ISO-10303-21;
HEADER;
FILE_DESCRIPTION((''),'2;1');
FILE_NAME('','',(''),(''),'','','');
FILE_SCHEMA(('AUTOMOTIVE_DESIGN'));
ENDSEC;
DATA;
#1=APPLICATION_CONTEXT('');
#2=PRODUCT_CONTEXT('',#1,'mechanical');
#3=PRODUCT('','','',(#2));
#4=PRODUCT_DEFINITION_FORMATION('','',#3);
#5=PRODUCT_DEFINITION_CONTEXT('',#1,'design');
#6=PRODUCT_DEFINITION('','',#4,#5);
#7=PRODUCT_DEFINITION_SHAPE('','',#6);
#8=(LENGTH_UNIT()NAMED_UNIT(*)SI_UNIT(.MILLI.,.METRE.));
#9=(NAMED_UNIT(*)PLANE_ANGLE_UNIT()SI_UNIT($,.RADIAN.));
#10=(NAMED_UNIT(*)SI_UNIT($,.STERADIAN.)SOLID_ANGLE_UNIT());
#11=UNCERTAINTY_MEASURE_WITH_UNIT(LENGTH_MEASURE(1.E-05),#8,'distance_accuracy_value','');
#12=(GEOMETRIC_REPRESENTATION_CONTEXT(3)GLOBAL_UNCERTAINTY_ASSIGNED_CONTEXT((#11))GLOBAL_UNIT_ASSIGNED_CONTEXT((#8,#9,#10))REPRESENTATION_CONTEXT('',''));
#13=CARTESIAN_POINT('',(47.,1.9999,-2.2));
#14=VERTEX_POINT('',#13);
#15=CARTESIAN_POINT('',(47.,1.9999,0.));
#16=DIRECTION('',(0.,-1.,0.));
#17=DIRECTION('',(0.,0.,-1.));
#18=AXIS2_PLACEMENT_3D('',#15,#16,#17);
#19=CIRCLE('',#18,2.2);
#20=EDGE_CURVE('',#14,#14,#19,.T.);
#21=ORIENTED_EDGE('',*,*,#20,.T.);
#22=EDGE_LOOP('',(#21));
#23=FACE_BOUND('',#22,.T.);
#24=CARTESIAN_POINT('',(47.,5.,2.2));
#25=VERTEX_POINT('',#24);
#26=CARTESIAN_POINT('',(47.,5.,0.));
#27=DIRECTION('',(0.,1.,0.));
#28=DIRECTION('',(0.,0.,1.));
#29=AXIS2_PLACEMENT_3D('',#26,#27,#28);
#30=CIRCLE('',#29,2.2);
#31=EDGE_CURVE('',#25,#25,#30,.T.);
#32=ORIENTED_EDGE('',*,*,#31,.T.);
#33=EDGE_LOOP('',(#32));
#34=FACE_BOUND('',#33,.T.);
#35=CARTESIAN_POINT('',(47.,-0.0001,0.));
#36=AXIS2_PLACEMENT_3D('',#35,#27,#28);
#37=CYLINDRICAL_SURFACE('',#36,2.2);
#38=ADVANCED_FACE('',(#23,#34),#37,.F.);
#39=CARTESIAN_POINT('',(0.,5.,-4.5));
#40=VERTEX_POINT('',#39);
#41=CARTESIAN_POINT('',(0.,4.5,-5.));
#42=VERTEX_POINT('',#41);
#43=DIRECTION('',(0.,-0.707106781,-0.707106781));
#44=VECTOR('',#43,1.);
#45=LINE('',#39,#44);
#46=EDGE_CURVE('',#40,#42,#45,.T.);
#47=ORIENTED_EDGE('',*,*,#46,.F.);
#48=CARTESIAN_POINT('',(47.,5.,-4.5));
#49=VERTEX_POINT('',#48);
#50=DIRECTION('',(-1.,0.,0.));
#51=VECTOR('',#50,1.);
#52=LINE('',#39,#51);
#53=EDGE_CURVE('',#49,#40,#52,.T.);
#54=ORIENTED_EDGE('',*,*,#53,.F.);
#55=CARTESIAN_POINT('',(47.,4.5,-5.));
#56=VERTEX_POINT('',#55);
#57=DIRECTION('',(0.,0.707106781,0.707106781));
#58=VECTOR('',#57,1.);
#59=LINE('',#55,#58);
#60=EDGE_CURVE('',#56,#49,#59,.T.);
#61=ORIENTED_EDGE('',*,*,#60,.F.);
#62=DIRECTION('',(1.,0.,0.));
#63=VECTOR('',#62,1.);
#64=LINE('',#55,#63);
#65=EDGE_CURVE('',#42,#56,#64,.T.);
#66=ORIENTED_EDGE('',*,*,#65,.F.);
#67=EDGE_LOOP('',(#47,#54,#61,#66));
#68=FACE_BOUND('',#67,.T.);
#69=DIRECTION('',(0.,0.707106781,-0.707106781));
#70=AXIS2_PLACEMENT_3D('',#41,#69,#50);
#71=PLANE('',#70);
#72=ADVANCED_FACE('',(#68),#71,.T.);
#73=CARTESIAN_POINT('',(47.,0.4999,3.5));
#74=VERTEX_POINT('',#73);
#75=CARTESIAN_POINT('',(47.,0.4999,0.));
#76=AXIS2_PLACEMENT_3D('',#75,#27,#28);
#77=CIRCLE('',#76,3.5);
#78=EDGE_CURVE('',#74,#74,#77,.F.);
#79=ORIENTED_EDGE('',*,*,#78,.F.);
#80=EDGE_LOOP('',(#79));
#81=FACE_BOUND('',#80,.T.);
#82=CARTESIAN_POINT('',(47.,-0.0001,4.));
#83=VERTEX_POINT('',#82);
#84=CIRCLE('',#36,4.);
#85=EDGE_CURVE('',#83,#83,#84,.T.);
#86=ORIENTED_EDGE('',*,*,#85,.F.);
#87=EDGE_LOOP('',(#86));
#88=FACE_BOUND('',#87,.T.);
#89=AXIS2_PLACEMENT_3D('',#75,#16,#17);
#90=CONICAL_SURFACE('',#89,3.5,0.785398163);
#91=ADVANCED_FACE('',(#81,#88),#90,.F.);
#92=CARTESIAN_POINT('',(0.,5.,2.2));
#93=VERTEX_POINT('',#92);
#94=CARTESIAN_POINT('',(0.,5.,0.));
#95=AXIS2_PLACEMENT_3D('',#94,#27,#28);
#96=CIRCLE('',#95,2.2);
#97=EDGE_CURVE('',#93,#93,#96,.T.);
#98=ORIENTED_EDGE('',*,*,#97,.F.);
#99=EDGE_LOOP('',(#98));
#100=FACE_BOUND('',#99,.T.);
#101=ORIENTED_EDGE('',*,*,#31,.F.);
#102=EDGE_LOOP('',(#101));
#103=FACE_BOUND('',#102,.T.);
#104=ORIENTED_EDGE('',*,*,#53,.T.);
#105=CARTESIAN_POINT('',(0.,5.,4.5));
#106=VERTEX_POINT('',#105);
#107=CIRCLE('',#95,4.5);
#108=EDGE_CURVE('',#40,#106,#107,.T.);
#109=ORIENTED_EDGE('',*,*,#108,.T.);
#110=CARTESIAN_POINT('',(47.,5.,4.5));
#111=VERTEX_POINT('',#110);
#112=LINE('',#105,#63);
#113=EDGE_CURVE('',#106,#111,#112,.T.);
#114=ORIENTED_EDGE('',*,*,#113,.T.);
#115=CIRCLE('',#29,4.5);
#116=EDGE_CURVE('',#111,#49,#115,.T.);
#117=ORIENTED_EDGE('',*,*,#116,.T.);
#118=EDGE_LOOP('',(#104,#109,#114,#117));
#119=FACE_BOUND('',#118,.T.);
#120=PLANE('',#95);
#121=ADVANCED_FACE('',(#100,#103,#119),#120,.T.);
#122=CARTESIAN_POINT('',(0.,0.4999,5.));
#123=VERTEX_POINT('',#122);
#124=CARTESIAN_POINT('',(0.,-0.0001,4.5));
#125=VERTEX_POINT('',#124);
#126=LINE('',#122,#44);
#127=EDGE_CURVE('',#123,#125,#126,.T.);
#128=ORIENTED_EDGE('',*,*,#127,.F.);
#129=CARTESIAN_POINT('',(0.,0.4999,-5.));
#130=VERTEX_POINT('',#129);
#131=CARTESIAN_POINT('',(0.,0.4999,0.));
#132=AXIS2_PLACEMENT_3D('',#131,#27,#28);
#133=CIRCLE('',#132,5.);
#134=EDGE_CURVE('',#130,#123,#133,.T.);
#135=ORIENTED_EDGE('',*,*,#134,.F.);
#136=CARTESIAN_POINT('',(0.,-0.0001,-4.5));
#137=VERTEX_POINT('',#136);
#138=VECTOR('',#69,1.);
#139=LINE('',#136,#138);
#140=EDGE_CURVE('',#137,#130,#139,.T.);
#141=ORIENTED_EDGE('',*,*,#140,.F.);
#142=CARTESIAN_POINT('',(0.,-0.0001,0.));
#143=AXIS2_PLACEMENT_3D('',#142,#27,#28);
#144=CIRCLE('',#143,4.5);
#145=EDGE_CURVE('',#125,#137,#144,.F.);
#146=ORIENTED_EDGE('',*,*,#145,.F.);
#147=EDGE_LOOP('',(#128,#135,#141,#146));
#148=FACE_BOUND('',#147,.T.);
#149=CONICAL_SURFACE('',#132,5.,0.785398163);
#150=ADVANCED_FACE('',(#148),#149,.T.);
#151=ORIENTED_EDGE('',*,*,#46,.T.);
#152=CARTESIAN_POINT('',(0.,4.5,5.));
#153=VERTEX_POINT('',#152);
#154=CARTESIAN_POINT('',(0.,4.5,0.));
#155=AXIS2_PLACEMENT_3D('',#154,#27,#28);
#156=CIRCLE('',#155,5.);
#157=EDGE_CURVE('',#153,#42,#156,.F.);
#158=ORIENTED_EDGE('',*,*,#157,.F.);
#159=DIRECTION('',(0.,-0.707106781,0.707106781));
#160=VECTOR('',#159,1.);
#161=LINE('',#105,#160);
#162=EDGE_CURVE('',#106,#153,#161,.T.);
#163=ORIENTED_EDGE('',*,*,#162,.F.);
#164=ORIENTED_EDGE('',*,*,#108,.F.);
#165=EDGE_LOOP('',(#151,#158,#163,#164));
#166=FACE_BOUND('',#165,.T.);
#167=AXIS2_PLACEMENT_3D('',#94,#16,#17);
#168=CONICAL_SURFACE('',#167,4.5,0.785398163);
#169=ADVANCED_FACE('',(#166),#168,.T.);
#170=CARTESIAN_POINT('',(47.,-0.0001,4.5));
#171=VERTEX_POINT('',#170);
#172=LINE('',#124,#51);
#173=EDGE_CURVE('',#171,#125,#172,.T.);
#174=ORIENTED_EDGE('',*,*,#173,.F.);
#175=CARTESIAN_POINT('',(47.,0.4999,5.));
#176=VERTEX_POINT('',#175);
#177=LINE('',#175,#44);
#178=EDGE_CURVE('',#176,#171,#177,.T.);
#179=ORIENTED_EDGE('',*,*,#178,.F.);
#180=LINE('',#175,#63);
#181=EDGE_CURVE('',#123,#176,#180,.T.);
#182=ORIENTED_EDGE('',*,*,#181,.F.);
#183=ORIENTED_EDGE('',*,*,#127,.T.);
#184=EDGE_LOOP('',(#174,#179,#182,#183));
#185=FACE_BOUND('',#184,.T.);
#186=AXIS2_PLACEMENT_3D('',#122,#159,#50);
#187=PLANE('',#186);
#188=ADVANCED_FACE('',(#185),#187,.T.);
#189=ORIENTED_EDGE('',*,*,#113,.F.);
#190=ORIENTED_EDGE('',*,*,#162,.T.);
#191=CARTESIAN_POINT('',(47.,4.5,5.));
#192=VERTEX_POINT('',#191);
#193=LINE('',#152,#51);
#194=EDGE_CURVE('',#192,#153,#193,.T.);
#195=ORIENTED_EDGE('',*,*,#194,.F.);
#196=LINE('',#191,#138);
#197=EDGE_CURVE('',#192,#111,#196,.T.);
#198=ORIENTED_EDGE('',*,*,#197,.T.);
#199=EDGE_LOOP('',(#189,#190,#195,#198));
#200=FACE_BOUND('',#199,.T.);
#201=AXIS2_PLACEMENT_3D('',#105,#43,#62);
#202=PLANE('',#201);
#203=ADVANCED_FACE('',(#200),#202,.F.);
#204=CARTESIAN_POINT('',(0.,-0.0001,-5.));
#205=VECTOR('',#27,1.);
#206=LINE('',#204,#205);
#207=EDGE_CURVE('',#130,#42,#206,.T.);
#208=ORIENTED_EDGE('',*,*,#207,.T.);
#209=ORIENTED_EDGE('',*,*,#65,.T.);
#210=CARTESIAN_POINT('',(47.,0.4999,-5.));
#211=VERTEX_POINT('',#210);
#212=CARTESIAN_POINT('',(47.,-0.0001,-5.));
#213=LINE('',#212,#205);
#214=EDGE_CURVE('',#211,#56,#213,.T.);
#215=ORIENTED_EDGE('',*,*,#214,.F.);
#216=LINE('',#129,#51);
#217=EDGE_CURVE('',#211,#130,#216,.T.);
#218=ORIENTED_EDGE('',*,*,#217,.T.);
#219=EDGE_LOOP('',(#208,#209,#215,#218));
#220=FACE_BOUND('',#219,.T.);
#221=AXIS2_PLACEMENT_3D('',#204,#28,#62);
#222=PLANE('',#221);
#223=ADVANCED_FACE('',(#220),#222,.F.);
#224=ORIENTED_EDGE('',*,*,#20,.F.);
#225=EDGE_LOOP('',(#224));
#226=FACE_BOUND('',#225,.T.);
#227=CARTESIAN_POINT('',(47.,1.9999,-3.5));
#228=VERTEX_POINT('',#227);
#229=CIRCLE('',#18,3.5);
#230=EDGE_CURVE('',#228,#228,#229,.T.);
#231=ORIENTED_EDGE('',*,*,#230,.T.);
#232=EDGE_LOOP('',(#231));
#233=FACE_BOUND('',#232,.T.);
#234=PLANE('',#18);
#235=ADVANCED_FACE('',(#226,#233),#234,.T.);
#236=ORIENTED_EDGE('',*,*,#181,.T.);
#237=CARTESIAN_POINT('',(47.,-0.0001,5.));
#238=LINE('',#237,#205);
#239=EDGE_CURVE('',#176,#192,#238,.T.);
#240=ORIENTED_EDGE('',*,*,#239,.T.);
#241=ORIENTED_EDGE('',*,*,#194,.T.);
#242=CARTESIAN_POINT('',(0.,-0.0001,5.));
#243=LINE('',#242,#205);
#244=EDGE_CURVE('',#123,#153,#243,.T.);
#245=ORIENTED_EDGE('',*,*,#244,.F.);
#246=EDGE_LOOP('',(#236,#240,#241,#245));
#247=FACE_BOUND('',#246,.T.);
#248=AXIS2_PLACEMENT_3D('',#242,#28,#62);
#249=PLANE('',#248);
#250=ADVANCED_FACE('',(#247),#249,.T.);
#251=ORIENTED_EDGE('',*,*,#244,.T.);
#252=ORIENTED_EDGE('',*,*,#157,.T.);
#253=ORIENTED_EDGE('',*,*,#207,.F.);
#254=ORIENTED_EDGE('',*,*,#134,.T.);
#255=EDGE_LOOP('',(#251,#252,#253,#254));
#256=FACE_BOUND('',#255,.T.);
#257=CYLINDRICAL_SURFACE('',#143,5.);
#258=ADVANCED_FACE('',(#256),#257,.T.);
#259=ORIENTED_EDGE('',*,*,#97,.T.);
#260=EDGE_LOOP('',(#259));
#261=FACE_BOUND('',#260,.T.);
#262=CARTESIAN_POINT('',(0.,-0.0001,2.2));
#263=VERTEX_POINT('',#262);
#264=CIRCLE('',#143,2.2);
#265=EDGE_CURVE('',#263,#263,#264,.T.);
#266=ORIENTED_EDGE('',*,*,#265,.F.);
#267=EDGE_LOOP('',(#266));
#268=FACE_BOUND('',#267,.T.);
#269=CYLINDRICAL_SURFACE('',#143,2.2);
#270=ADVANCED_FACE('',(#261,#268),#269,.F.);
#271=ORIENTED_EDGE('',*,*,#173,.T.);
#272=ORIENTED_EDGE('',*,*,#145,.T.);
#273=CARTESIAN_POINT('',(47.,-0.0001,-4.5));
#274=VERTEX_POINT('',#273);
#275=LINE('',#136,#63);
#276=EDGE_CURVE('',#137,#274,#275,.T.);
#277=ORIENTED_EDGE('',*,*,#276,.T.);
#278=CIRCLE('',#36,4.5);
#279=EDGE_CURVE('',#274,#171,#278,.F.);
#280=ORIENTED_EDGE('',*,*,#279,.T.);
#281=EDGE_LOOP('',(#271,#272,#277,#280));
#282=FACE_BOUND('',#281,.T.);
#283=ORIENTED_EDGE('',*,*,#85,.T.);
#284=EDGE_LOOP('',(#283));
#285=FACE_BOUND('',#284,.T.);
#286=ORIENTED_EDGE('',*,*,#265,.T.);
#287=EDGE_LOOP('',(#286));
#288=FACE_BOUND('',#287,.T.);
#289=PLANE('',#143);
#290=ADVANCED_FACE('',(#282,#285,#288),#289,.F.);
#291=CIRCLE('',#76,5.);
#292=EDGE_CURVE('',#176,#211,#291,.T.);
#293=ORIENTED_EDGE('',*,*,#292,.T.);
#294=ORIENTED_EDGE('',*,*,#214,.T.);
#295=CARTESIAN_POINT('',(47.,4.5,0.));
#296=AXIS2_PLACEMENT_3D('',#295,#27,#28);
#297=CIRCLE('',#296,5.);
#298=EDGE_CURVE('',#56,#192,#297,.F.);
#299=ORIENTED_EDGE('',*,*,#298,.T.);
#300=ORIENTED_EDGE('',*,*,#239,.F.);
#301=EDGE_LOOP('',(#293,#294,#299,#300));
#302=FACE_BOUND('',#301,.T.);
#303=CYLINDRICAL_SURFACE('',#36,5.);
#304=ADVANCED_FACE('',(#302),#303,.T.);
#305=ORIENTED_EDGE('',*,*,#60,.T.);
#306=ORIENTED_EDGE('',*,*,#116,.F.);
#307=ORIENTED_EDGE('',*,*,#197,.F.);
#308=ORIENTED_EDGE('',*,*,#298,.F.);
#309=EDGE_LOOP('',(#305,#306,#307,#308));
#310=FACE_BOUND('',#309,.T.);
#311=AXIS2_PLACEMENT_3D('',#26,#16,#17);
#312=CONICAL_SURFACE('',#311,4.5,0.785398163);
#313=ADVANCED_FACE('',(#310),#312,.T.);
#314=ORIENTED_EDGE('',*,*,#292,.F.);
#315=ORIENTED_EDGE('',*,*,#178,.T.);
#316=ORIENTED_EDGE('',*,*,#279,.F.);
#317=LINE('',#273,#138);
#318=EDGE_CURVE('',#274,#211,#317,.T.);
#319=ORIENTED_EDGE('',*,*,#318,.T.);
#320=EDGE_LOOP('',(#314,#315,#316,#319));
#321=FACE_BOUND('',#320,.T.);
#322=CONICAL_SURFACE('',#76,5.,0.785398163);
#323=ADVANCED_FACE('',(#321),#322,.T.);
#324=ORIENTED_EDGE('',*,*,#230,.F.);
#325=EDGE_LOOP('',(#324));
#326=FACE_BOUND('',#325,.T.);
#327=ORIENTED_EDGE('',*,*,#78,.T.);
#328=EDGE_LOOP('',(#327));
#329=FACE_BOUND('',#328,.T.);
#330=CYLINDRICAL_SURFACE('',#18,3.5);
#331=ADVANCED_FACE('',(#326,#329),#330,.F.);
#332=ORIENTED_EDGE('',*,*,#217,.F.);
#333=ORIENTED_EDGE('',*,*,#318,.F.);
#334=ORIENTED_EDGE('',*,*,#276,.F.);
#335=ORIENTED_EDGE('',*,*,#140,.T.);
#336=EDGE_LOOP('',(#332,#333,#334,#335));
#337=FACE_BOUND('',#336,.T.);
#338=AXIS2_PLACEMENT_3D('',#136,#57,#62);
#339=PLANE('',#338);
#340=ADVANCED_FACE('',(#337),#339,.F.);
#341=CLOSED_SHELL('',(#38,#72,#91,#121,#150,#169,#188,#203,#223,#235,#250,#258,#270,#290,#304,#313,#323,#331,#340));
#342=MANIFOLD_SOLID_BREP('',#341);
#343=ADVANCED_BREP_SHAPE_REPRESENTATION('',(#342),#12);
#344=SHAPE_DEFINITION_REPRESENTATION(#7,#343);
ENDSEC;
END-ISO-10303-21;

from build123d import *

# Parameters (mm, degrees)
EXTRUDE_START       = -0.0001
EXTRUDE_2_OUTLINE_R = 2.2
EXTRUDE_2_DEPTH     = 5.0001
SKETCH_3_R          = 3.5
SKETCH_3_R_2        = 2.2
CUT_EXTRUDE_1_DEPTH = 2
CHAMFER_1_SIZE      = 0.5


# Read off the part's stored shape, not the designer's step: 凸台-拉伸2
with BuildPart() as part:
    # 凸台-拉伸2 outline → 凸台-拉伸2 (new body)
    with BuildSketch(Plane(origin=(0, 0, 0), x_dir=(1, 0, 0), z_dir=(0, 1, 0)).offset(EXTRUDE_START)):
        with BuildLine():
            Line((47, 5), (0, 5))
            ThreePointArc((0, 5), (-5, 0), (0, -5))
            Line((0, -5), (47, -5))
            ThreePointArc((47, -5), (52, 0), (47, 5))
        make_face()
        Circle(EXTRUDE_2_OUTLINE_R, mode=Mode.SUBTRACT)
        with Locations((47, 0)):
            Circle(EXTRUDE_2_OUTLINE_R, mode=Mode.SUBTRACT)
    extrude(amount=EXTRUDE_2_DEPTH)

    # 草图3 → 切除-拉伸1 (cut)
    with BuildSketch(Plane.XZ.offset(0.0001)):
        with Locations(Location((47, 0, 0), (0, 0, 270))):
            Circle(SKETCH_3_R)
        with Locations(Location((47, 0, 0), (0, 0, 90))):
            Circle(SKETCH_3_R_2, mode=Mode.SUBTRACT)
    extrude(amount=-CUT_EXTRUDE_1_DEPTH, mode=Mode.SUBTRACT)

    # 倒角1
    chamfer_1_edges = [part.edges().sort_by_distance(p)[0] for p in [
        (52, -0.0001, 0),
        (23.5, -0.0001, -5),
        (-5, 5, 0),
        (23.5, 5, 5),
        (52, 5, 0),
        (23.5, 5, -5),
        (47, -0.0001, 3.5),
        (-5, -0.0001, 0),
        (23.5, -0.0001, 5),
    ]]
    chamfer(chamfer_1_edges, length=CHAMFER_1_SIZE)


solid = part.part
